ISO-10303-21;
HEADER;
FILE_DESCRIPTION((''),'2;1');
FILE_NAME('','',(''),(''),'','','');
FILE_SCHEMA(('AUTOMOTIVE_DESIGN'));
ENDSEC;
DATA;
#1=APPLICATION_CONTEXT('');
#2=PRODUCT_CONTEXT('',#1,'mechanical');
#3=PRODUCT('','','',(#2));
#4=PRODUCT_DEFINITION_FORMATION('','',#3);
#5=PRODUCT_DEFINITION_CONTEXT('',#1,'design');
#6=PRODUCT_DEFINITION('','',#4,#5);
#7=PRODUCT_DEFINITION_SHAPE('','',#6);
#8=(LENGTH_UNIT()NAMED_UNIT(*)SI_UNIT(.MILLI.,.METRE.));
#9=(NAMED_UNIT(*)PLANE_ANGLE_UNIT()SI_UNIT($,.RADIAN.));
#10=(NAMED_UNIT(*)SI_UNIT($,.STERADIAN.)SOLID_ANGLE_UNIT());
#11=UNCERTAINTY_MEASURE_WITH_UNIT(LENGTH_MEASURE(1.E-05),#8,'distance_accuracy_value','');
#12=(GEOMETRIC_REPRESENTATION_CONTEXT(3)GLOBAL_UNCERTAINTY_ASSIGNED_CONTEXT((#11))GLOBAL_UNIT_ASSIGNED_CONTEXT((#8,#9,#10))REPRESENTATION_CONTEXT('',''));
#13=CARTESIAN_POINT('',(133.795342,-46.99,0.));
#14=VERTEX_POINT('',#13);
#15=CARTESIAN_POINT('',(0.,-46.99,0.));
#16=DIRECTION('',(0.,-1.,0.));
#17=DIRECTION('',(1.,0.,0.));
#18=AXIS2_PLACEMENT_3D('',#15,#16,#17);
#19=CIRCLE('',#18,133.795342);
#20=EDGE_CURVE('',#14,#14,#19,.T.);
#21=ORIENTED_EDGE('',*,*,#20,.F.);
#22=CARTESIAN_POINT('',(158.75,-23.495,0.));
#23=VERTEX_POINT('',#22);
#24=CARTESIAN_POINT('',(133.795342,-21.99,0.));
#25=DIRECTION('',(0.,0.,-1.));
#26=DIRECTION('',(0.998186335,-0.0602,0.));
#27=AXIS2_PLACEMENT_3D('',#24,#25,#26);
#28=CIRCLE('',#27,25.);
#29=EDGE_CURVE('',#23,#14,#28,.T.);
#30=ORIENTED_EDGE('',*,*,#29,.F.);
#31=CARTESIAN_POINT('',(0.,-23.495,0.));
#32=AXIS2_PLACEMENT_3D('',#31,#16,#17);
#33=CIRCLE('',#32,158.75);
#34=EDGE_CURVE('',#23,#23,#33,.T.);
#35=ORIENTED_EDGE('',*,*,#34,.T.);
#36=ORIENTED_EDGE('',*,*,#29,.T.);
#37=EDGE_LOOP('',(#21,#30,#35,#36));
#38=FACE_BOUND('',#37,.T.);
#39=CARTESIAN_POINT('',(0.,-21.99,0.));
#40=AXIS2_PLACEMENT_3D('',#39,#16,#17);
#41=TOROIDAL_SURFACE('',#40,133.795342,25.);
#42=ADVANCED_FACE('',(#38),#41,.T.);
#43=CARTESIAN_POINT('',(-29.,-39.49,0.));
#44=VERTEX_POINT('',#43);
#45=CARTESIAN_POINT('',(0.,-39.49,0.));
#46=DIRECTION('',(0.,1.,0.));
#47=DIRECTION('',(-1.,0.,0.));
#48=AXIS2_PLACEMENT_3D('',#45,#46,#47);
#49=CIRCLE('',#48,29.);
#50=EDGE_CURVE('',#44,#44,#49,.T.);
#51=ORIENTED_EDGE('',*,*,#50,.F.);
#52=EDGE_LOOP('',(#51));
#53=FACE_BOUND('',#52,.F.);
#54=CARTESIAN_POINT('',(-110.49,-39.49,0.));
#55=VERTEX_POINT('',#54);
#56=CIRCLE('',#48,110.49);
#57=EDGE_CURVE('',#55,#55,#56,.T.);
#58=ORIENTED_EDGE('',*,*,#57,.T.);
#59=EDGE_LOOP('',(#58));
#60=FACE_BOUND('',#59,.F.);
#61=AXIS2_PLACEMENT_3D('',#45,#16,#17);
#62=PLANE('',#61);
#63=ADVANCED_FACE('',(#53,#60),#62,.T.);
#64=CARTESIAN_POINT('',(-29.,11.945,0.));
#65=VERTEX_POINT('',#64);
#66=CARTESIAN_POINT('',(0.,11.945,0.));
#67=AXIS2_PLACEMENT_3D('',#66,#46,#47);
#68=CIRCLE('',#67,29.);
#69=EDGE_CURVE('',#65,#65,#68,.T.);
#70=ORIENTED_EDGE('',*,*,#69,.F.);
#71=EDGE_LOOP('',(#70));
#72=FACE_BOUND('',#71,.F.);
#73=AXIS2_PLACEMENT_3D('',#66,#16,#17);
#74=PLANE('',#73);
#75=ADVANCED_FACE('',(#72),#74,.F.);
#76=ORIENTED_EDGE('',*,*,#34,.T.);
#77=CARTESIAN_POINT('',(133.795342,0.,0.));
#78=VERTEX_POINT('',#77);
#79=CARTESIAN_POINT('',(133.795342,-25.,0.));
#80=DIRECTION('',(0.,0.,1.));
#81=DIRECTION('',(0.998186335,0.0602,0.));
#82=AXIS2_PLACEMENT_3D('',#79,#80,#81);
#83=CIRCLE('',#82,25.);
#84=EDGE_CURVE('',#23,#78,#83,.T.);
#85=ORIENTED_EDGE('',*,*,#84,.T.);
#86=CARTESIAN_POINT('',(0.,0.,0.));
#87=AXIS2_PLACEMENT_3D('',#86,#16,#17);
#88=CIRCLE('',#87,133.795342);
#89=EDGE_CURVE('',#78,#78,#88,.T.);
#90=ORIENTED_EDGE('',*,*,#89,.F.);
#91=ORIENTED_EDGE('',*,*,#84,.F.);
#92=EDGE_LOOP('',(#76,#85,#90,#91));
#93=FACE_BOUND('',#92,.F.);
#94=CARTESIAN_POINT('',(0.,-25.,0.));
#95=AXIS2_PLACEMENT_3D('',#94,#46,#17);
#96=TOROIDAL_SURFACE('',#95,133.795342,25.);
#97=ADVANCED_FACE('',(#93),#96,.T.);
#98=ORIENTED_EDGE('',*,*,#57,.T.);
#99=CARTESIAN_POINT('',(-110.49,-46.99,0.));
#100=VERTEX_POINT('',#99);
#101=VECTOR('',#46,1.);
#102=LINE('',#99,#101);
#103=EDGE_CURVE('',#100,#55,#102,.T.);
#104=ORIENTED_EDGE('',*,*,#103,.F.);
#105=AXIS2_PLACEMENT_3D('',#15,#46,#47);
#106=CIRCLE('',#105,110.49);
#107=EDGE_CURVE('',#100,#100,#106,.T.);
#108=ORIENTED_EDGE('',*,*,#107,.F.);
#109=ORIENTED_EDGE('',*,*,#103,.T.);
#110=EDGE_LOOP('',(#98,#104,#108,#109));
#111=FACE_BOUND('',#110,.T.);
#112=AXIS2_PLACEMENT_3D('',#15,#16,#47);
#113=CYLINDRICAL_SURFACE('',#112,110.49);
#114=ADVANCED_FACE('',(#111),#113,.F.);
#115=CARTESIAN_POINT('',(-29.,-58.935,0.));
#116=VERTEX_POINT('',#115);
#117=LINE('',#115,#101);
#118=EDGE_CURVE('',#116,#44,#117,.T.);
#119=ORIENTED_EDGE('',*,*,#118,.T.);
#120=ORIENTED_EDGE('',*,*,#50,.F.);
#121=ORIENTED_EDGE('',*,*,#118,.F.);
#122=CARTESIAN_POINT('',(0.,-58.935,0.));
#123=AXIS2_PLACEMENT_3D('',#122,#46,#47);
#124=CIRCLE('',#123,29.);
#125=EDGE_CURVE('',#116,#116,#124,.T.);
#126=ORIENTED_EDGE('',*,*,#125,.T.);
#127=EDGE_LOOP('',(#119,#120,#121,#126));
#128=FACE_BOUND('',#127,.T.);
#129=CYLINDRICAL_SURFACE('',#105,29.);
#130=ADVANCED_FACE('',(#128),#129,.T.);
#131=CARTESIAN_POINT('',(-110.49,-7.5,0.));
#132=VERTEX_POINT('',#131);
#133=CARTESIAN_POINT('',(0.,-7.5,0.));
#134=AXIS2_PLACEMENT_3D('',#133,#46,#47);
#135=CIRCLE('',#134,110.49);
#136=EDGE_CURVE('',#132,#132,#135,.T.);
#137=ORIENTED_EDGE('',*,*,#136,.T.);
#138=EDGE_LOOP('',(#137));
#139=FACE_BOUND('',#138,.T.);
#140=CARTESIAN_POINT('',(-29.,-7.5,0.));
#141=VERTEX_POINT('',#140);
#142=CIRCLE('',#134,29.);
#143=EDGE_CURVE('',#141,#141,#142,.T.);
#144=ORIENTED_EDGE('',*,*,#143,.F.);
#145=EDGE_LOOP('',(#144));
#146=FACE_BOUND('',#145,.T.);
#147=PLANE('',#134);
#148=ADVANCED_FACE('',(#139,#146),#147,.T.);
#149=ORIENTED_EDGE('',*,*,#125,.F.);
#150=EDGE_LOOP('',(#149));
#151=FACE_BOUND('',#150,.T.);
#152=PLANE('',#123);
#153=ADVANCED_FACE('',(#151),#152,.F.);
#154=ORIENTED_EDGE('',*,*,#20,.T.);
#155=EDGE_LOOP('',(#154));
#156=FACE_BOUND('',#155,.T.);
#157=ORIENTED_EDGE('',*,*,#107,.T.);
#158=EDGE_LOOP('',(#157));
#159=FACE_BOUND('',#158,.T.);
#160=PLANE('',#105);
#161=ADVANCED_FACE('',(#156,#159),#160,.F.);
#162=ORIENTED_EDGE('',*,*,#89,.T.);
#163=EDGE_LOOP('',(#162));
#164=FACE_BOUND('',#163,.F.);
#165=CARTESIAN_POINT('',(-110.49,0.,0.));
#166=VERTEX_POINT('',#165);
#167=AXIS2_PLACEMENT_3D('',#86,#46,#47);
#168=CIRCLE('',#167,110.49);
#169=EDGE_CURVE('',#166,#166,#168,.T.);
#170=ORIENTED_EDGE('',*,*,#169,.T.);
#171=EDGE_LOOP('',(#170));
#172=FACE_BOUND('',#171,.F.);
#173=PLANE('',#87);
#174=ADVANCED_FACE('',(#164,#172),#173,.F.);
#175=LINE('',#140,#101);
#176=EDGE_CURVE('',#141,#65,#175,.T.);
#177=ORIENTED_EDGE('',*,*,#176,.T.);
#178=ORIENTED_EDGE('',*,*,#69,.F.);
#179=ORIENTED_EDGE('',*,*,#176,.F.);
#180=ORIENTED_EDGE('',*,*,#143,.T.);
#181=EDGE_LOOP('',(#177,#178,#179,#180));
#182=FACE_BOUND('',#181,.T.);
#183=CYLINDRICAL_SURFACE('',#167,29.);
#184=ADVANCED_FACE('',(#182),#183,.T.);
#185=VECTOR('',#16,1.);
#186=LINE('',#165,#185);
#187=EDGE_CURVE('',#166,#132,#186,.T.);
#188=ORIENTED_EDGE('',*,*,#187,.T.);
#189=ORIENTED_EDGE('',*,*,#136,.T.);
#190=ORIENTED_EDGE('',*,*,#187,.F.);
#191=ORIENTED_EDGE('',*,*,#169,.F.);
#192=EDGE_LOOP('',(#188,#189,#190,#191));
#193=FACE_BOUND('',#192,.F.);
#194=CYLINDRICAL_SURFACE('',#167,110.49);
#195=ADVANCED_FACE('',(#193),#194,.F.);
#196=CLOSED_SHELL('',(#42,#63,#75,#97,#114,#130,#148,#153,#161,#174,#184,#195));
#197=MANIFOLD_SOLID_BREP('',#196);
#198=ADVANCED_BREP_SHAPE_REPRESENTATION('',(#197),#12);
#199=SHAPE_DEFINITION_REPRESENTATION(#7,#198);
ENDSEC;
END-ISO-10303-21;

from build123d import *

# Parameters (mm, degrees)
F0_R     = 158.75
F1_DEPTH = 23.495
F3_R     = 110.49
F3_R_2   = 29
F4_DEPTH = 7.5
F5_DEPTH = 11.945


# Not quite as in the source:
# - a fillet or chamfer that OpenCascade refuses, or shapes differently, is made with other operations: its cross-section is extruded or revolved along the edge and cut away or added


with BuildPart() as f1:
    # F0 (on Front) → F1 (new body)
    with BuildSketch(Plane.XZ):
        Circle(F0_R)
    extrude(amount=F1_DEPTH)

    # F2: fillet of radius 25 on 1 edges, made by hand

    # F2_s1 → F2_t2 (revolve, cut)
    with BuildSketch(Plane.XY):
        with BuildLine():
            ThreePointArc((158.75, -23.495), (150.9326547089, -6.7980083507), (133.7953416172, 0))
            Line((133.7953416172, 0), (158.75, 0))
            Line((158.75, 0), (158.75, -23.495))
        make_face()
    revolve(axis=Axis((0, 0, 0), (0, -1, 0)), mode=Mode.SUBTRACT)

    # F3 (on face) → F4 (cut)
    with BuildSketch(Plane(origin=(0, 0, 0), x_dir=(-1, 0, 0), z_dir=(0, 1, 0))):
        Circle(F3_R)
        Circle(F3_R_2, mode=Mode.SUBTRACT)
    extrude(amount=-F4_DEPTH, mode=Mode.SUBTRACT)

    # F5 (add): a face of the model
    f5_faces = [f1.faces().sort_by_distance(p)[0] for p in [
        (0, 0, 0),
    ]]
    extrude(f5_faces, amount=F5_DEPTH)

    # F6: F1 across face


with BuildPart() as f1_1:
    add(f1.part)
    add(f1.part.mirror(Plane.XZ.offset(23.495)))


solid = f1_1.part
